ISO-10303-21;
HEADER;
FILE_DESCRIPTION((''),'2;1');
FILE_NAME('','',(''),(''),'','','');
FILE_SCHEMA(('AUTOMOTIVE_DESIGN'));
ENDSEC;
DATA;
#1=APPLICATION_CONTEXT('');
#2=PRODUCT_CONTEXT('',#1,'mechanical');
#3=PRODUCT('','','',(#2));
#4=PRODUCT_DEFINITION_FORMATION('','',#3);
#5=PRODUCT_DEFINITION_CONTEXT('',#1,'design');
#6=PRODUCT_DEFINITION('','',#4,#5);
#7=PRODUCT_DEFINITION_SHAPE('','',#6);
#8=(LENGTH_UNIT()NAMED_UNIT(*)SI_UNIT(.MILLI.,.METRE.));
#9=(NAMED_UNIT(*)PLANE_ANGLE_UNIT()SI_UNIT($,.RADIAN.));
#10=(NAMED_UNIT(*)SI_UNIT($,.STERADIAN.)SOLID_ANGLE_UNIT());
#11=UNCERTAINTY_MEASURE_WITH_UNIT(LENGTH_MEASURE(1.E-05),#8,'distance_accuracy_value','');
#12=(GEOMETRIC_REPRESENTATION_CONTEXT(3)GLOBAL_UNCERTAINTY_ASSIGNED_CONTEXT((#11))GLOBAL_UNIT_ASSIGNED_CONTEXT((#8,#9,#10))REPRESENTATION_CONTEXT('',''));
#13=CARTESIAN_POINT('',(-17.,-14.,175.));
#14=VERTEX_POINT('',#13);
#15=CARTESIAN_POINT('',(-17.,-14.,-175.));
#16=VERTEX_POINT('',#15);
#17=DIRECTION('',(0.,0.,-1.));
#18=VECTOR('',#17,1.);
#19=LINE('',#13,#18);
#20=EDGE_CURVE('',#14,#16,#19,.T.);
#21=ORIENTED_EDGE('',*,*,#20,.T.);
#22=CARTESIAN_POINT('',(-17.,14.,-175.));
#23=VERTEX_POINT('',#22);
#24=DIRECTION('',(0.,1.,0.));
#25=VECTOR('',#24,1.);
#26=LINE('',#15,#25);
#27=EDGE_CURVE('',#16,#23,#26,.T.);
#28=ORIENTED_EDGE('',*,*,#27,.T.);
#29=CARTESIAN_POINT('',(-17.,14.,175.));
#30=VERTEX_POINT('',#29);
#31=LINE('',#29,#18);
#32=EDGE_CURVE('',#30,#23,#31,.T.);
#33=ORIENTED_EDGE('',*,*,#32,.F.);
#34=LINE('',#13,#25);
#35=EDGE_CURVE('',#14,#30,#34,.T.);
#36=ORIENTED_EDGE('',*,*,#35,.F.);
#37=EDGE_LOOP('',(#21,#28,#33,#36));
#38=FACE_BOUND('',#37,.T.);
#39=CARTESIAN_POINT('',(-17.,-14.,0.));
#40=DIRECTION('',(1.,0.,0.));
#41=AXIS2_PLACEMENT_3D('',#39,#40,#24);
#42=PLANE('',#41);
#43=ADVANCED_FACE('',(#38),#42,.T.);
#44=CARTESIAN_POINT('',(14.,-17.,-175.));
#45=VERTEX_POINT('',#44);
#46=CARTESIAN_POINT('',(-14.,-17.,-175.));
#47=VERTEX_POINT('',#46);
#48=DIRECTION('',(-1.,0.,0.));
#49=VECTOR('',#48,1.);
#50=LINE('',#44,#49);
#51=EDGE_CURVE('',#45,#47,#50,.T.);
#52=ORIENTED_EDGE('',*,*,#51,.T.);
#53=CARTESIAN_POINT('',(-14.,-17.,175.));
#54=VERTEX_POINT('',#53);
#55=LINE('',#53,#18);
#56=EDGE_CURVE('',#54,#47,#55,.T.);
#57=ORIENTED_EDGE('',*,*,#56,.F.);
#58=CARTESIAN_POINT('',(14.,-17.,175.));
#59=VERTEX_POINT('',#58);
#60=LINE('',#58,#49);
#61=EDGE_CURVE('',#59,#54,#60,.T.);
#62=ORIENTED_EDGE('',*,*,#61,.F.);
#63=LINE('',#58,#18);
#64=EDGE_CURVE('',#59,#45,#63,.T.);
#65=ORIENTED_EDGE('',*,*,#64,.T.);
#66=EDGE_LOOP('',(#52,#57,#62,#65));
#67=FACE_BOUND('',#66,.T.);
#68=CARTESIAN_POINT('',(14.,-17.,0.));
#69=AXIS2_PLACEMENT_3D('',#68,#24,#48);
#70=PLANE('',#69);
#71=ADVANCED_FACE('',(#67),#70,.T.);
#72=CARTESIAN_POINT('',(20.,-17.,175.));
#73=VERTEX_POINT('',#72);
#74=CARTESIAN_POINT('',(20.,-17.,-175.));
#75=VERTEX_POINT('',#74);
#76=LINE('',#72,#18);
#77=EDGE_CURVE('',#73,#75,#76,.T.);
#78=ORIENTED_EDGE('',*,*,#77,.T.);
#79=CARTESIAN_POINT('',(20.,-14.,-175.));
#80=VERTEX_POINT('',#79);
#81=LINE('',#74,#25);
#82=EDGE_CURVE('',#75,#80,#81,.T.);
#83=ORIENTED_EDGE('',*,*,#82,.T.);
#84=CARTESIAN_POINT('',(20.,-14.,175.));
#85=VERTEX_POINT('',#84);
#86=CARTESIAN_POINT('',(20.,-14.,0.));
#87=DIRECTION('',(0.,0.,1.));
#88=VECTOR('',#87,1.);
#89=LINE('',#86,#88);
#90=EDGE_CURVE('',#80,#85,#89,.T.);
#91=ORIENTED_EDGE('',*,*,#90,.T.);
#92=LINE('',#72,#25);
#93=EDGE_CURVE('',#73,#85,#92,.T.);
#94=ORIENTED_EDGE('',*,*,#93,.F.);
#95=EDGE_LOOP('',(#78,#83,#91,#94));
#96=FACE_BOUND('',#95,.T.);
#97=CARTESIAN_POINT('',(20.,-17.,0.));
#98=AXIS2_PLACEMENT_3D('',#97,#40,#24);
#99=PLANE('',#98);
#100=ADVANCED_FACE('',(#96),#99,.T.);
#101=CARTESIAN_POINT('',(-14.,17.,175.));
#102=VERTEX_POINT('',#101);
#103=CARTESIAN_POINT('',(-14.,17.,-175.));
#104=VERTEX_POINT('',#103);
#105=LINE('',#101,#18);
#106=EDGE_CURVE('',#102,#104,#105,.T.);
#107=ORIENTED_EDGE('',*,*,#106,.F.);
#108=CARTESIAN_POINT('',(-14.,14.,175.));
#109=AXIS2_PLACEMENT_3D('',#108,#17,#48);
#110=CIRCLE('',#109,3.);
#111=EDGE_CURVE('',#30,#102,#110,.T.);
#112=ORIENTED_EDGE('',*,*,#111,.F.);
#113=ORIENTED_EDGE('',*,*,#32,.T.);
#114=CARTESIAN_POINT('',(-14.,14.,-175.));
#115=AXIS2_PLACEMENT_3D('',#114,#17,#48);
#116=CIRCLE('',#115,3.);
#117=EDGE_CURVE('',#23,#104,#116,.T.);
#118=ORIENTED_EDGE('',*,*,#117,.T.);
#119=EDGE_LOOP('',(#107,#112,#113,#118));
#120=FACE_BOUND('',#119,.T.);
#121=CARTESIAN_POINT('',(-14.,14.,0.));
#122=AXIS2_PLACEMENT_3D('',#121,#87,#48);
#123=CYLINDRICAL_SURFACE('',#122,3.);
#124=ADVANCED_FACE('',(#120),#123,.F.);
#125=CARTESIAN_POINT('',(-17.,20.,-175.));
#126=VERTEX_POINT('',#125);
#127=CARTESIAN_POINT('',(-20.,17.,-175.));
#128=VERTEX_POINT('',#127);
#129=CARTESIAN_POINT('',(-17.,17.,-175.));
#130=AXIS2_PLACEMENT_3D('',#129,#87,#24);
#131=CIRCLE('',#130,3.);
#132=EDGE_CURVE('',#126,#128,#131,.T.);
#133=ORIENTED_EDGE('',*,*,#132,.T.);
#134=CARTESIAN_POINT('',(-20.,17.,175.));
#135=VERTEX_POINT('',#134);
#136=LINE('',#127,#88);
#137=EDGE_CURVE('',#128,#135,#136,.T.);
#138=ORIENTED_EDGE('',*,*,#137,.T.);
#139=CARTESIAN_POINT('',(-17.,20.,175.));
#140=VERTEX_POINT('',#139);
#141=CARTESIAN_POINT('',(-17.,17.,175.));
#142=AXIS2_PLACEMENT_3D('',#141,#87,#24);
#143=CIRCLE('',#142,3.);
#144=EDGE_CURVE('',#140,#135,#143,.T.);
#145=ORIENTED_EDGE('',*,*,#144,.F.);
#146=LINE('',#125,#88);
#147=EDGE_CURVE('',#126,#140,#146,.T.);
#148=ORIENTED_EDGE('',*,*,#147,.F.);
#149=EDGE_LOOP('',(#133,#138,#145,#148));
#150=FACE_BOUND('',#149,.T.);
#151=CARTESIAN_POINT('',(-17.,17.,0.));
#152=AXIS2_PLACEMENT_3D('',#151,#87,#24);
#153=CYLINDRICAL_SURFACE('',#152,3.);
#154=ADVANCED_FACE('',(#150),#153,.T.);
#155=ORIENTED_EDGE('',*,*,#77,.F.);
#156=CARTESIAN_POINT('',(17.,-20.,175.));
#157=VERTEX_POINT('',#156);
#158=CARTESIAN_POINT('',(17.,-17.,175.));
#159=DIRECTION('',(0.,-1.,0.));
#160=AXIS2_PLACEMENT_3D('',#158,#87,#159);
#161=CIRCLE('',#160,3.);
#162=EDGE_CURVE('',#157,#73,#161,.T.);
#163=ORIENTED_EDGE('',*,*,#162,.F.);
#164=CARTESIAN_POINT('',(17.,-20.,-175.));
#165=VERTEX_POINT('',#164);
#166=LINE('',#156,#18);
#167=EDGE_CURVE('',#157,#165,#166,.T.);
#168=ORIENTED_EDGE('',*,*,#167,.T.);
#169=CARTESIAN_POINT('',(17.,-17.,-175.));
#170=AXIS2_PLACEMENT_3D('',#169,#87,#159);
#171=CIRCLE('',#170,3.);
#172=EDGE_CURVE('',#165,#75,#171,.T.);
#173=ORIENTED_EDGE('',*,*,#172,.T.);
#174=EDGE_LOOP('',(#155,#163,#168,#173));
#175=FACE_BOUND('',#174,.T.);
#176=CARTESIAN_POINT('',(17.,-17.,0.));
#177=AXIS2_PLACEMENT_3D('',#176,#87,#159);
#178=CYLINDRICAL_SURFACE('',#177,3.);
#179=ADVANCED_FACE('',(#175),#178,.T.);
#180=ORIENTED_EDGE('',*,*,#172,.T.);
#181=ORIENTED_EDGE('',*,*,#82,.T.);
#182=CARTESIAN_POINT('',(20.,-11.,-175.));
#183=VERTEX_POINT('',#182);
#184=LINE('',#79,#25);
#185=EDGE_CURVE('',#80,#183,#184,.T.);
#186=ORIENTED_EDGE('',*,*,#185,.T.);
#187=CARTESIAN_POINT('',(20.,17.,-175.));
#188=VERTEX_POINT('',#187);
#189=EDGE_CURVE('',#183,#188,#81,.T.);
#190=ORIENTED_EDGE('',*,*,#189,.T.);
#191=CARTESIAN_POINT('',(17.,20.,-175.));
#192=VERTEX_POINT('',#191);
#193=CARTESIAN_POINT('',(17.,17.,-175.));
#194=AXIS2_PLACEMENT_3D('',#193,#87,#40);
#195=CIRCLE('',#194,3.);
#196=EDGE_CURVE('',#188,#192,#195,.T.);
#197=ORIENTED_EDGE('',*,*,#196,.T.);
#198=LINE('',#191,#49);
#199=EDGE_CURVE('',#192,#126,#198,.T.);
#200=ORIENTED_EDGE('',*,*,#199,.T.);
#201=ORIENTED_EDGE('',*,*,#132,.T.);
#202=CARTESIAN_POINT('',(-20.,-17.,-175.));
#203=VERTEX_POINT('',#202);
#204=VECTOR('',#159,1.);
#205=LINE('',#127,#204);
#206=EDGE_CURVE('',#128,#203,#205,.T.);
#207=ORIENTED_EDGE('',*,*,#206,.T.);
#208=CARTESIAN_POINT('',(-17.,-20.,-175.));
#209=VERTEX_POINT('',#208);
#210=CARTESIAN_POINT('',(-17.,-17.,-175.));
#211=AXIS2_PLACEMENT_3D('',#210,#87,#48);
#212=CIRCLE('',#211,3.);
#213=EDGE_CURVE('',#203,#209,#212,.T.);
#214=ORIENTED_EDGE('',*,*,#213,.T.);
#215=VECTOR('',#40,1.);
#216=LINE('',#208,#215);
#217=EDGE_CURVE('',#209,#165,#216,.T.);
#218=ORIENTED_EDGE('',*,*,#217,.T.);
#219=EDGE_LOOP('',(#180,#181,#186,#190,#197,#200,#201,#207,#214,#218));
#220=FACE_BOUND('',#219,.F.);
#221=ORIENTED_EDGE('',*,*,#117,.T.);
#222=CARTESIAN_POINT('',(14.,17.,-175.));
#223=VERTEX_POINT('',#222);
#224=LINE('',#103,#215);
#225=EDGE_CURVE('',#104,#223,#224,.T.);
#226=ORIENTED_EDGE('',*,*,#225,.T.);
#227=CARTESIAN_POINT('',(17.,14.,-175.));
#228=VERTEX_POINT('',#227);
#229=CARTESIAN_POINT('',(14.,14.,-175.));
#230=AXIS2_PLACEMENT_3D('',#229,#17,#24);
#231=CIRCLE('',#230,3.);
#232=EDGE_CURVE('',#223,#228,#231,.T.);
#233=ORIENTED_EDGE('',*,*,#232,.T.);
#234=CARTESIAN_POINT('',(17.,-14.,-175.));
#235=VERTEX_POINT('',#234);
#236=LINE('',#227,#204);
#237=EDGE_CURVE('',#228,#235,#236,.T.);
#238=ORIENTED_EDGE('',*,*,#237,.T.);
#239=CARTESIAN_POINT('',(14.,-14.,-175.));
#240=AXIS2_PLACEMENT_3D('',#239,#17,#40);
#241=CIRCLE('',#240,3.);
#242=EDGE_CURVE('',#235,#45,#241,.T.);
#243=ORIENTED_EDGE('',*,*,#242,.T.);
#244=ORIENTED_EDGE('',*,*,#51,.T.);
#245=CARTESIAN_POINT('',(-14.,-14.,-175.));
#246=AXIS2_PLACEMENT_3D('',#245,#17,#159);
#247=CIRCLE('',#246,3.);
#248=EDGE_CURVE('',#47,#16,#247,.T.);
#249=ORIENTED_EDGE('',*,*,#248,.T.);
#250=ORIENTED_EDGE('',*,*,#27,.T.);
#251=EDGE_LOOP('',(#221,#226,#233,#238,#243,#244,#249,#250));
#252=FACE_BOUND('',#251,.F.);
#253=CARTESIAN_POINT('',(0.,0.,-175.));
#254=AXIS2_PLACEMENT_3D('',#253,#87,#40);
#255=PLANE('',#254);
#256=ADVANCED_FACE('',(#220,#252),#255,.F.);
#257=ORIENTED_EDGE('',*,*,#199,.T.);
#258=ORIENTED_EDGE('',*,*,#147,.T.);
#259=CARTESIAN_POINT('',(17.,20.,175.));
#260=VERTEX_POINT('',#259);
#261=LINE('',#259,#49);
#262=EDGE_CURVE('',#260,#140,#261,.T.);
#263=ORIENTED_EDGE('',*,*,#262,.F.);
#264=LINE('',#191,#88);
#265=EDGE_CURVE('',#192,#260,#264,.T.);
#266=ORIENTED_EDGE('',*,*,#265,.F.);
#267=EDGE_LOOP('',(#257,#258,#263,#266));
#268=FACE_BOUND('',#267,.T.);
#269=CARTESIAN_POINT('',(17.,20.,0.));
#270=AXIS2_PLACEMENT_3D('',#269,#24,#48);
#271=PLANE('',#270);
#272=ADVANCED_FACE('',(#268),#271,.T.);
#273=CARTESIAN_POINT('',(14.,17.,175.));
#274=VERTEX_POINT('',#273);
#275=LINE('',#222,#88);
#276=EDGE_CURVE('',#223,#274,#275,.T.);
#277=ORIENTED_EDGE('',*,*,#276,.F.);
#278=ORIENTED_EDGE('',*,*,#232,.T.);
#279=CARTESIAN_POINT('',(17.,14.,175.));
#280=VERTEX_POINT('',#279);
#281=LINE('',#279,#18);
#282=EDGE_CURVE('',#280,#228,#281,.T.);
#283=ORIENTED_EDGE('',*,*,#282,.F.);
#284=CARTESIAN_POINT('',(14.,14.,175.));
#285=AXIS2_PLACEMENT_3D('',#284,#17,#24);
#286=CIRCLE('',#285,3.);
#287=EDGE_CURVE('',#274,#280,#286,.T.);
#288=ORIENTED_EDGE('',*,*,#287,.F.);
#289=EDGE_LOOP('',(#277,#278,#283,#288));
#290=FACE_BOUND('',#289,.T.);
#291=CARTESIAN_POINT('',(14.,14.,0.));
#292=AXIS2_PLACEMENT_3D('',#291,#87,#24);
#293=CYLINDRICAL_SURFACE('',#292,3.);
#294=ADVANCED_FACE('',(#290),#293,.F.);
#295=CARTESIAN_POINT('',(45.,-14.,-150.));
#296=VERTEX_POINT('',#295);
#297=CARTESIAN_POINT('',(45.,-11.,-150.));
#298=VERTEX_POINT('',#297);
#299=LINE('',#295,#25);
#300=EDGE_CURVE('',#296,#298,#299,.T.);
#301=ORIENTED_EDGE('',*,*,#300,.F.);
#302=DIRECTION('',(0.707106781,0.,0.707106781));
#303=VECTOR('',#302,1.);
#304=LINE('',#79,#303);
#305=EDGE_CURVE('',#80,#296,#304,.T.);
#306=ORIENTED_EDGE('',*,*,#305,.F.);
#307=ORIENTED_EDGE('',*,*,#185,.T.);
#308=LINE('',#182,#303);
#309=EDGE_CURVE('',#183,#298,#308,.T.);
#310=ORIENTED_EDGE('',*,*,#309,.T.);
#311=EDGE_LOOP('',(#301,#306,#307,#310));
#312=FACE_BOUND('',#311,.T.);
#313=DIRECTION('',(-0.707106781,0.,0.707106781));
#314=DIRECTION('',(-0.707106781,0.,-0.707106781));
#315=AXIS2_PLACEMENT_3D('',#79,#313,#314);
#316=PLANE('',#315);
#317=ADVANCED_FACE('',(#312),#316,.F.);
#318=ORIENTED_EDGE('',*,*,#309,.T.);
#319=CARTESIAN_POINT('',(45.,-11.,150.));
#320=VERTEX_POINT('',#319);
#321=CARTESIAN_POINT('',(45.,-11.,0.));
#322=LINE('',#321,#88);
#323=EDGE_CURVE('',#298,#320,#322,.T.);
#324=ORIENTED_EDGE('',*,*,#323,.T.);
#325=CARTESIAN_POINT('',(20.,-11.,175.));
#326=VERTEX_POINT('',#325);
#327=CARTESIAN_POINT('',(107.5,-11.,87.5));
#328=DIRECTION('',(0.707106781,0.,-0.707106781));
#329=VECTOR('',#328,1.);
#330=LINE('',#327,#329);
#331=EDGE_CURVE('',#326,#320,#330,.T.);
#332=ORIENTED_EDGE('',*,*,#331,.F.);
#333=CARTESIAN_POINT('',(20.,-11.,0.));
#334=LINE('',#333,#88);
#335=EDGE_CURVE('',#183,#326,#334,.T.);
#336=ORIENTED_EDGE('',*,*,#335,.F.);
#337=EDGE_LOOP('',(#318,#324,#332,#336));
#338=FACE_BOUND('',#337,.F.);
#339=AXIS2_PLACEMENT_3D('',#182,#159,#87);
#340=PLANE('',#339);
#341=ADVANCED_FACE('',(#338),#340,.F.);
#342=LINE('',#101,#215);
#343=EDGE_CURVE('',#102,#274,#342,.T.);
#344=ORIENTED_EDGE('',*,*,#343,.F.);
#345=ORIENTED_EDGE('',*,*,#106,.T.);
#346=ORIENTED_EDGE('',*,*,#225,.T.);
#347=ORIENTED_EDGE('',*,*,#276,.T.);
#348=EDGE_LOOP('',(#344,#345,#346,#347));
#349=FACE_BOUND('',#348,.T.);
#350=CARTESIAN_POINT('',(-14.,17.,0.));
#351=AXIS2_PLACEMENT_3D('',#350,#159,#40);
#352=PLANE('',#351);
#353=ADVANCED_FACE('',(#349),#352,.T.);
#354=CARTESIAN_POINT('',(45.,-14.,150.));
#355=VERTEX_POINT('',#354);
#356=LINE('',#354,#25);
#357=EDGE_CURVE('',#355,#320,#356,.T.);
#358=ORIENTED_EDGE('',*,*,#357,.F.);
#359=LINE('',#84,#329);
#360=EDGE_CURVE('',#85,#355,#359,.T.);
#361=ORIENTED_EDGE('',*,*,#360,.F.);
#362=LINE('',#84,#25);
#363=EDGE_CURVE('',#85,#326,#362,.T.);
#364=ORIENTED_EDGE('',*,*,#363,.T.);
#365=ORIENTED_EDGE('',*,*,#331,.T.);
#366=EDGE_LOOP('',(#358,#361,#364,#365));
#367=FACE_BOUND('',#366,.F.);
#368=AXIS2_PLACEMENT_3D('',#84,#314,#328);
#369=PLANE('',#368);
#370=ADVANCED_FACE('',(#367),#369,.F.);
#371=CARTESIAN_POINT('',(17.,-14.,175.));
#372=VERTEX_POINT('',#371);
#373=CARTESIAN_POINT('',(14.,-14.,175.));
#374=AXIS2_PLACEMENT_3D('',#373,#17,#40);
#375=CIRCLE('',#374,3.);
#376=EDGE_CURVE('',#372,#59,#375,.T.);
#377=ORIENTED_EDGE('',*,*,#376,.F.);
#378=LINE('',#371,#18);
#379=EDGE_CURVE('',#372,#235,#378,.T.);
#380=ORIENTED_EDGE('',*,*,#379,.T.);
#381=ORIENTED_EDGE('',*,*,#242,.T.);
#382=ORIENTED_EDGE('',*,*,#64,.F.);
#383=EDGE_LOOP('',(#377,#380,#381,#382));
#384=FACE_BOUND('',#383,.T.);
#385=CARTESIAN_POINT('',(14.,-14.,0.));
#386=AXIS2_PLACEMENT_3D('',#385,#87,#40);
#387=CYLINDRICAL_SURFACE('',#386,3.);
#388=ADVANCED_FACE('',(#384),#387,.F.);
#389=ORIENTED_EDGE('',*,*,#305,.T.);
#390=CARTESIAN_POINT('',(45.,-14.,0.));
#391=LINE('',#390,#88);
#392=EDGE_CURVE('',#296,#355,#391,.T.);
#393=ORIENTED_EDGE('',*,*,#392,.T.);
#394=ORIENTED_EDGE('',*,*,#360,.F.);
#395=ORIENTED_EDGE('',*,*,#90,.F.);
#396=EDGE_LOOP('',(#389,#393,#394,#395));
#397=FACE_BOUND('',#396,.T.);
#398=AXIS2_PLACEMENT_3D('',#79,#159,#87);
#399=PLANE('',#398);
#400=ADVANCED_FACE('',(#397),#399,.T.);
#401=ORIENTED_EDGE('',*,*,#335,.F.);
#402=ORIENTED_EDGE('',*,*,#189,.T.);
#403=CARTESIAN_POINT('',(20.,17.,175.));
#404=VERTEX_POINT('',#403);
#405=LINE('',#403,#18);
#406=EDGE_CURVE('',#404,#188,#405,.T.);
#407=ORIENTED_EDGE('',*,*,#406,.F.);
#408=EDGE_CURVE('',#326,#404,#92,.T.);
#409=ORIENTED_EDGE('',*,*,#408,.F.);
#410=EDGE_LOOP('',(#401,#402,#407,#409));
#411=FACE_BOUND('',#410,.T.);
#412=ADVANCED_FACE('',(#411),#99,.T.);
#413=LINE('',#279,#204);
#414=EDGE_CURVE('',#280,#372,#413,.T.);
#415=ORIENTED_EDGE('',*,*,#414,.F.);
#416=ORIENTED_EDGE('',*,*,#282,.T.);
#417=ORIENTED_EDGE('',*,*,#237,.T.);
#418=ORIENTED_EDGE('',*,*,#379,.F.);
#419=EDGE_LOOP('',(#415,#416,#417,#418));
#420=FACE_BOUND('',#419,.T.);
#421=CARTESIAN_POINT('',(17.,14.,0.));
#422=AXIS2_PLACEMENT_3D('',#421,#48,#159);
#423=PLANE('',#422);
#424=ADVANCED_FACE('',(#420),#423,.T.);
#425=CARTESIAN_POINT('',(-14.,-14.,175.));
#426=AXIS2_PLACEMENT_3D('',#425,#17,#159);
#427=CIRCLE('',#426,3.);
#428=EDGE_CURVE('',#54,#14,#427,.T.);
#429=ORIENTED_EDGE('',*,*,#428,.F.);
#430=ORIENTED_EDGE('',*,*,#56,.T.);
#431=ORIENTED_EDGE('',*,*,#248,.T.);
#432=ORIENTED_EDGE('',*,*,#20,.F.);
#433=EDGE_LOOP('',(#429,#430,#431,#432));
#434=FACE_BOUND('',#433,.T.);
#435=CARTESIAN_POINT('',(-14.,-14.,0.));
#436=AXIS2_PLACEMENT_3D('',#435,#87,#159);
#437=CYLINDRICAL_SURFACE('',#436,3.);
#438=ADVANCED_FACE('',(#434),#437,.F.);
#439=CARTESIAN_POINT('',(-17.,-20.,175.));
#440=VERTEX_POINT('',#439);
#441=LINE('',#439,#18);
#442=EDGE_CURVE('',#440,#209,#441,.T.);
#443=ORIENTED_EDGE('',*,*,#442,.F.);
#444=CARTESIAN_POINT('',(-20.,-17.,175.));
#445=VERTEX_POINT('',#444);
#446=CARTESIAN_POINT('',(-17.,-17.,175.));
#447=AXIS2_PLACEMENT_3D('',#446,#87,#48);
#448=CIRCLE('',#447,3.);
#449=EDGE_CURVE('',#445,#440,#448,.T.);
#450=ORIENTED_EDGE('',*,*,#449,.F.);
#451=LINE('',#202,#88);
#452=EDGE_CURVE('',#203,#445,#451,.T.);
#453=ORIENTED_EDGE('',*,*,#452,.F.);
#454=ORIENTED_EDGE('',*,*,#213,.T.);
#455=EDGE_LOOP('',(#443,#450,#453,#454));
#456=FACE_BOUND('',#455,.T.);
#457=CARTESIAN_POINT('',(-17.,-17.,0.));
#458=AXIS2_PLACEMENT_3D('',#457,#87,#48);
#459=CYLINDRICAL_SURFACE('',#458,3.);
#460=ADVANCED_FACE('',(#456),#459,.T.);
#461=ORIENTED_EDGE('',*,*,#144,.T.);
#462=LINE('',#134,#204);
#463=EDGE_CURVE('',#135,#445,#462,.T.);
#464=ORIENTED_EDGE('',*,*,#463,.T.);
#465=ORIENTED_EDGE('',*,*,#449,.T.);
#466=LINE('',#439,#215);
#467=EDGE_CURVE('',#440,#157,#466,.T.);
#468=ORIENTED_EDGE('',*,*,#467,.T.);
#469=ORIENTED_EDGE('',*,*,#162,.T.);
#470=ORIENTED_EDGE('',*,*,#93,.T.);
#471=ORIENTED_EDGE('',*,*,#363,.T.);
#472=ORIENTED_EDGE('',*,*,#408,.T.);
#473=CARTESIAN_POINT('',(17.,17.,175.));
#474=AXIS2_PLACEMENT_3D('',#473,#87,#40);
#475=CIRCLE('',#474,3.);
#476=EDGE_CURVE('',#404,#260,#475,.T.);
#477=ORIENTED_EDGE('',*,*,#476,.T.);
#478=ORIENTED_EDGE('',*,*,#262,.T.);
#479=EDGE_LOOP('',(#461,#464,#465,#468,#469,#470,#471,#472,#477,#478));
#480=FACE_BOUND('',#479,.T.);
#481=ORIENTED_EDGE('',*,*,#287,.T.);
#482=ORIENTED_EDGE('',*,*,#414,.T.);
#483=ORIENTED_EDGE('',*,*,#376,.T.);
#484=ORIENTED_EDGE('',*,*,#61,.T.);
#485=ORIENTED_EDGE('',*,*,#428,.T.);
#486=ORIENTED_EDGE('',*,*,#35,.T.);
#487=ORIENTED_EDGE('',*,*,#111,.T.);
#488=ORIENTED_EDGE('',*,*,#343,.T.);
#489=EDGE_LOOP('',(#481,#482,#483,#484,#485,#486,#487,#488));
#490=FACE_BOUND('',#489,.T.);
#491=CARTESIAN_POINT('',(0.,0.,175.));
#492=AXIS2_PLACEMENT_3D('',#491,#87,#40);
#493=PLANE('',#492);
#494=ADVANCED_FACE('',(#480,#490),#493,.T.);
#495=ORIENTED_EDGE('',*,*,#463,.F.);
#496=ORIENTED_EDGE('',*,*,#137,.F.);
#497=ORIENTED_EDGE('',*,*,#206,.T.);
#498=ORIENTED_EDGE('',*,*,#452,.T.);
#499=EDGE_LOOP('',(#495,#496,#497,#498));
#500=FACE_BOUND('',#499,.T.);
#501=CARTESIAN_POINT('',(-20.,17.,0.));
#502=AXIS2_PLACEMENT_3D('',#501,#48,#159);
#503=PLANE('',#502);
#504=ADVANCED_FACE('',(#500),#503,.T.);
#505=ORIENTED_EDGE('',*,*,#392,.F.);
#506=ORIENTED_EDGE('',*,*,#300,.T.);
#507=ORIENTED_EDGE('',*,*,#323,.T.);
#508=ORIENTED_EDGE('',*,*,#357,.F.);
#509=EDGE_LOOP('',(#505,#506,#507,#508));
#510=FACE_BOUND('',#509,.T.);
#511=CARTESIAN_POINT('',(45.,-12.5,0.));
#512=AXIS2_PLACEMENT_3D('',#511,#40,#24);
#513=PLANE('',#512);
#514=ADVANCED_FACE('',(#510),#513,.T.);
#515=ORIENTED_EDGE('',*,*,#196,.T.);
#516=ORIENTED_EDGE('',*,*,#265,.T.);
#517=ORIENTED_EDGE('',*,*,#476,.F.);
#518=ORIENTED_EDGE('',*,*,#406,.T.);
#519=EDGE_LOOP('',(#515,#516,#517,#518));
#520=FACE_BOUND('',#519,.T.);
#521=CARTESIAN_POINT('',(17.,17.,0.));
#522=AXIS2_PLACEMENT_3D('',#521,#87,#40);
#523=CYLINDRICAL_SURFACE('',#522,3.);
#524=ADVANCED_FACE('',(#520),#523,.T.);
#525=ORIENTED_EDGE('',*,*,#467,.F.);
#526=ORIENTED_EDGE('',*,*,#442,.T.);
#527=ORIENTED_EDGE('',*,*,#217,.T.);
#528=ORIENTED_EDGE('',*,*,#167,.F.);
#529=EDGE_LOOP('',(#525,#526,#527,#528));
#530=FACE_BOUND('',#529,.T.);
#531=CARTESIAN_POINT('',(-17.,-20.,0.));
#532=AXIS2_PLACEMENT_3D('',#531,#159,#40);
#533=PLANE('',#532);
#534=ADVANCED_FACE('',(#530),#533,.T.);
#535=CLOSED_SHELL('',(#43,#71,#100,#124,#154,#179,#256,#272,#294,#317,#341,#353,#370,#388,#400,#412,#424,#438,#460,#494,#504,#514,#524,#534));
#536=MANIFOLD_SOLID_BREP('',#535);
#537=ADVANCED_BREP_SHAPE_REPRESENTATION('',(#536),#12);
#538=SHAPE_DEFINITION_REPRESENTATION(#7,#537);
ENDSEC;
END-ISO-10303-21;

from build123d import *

# Parameters (mm, degrees)
F1_DEPTH = 175
F2_W     = 3
F2_H     = 350
F3_DEPTH = 25
F5_DEPTH = 34.001


# Not quite as in the source:
# - a pattern or mirror of a feature is missing from the dataset's text; its kind, count and spacing are read off the source's solid


with BuildPart() as f1:
    # F0 (on Top) → F1 (new body, symmetric)
    with BuildSketch(Plane.XY):
        with BuildLine():
            ThreePointArc((20, 17), (19.1213203436, 19.1213203436), (17, 20))
            Line((17, 20), (-17, 20))
            ThreePointArc((-17, 20), (-19.1213203436, 19.1213203436), (-20, 17))
            Line((-20, 17), (-20, -17))
            ThreePointArc((-20, -17), (-19.1213203436, -19.1213203436), (-17, -20))
            Line((-17, -20), (17, -20))
            ThreePointArc((17, -20), (19.1213203436, -19.1213203436), (20, -17))
            Line((20, -17), (20, 17))
        make_face()
        with BuildLine():
            ThreePointArc((14, 17), (16.1213203436, 16.1213203436), (17, 14))
            Line((17, 14), (17, -14))
            ThreePointArc((17, -14), (16.1213203436, -16.1213203436), (14, -17))
            Line((14, -17), (-14, -17))
            ThreePointArc((-14, -17), (-16.1213203436, -16.1213203436), (-17, -14))
            Line((-17, -14), (-17, 14))
            ThreePointArc((-17, 14), (-16.1213203436, 16.1213203436), (-14, 17))
            Line((-14, 17), (14, 17))
        make_face(mode=Mode.SUBTRACT)
    extrude(amount=F1_DEPTH, both=True)

    # F2 (on face) → F3 (join)
    with BuildSketch(Plane.YZ.offset(20)):
        with Locations((-12.5, 0)):
            Rectangle(F2_W, F2_H)
    extrude(amount=F3_DEPTH)

    # F4 (on face) → F5 (cut, through all)
    with BuildSketch(Plane.XZ.offset(14)):
        Polygon((45, 175), (20, 175), (45, 150), align=None)
    f5 = extrude(amount=-F5_DEPTH, mode=Mode.SUBTRACT)

    # F5_copies: F5 across plane
    add(f5.mirror(Plane(origin=(0, 0, 0), x_dir=(-1, 0, 0), z_dir=(0, 0, -1))), mode=Mode.SUBTRACT)


solid = f1.part
